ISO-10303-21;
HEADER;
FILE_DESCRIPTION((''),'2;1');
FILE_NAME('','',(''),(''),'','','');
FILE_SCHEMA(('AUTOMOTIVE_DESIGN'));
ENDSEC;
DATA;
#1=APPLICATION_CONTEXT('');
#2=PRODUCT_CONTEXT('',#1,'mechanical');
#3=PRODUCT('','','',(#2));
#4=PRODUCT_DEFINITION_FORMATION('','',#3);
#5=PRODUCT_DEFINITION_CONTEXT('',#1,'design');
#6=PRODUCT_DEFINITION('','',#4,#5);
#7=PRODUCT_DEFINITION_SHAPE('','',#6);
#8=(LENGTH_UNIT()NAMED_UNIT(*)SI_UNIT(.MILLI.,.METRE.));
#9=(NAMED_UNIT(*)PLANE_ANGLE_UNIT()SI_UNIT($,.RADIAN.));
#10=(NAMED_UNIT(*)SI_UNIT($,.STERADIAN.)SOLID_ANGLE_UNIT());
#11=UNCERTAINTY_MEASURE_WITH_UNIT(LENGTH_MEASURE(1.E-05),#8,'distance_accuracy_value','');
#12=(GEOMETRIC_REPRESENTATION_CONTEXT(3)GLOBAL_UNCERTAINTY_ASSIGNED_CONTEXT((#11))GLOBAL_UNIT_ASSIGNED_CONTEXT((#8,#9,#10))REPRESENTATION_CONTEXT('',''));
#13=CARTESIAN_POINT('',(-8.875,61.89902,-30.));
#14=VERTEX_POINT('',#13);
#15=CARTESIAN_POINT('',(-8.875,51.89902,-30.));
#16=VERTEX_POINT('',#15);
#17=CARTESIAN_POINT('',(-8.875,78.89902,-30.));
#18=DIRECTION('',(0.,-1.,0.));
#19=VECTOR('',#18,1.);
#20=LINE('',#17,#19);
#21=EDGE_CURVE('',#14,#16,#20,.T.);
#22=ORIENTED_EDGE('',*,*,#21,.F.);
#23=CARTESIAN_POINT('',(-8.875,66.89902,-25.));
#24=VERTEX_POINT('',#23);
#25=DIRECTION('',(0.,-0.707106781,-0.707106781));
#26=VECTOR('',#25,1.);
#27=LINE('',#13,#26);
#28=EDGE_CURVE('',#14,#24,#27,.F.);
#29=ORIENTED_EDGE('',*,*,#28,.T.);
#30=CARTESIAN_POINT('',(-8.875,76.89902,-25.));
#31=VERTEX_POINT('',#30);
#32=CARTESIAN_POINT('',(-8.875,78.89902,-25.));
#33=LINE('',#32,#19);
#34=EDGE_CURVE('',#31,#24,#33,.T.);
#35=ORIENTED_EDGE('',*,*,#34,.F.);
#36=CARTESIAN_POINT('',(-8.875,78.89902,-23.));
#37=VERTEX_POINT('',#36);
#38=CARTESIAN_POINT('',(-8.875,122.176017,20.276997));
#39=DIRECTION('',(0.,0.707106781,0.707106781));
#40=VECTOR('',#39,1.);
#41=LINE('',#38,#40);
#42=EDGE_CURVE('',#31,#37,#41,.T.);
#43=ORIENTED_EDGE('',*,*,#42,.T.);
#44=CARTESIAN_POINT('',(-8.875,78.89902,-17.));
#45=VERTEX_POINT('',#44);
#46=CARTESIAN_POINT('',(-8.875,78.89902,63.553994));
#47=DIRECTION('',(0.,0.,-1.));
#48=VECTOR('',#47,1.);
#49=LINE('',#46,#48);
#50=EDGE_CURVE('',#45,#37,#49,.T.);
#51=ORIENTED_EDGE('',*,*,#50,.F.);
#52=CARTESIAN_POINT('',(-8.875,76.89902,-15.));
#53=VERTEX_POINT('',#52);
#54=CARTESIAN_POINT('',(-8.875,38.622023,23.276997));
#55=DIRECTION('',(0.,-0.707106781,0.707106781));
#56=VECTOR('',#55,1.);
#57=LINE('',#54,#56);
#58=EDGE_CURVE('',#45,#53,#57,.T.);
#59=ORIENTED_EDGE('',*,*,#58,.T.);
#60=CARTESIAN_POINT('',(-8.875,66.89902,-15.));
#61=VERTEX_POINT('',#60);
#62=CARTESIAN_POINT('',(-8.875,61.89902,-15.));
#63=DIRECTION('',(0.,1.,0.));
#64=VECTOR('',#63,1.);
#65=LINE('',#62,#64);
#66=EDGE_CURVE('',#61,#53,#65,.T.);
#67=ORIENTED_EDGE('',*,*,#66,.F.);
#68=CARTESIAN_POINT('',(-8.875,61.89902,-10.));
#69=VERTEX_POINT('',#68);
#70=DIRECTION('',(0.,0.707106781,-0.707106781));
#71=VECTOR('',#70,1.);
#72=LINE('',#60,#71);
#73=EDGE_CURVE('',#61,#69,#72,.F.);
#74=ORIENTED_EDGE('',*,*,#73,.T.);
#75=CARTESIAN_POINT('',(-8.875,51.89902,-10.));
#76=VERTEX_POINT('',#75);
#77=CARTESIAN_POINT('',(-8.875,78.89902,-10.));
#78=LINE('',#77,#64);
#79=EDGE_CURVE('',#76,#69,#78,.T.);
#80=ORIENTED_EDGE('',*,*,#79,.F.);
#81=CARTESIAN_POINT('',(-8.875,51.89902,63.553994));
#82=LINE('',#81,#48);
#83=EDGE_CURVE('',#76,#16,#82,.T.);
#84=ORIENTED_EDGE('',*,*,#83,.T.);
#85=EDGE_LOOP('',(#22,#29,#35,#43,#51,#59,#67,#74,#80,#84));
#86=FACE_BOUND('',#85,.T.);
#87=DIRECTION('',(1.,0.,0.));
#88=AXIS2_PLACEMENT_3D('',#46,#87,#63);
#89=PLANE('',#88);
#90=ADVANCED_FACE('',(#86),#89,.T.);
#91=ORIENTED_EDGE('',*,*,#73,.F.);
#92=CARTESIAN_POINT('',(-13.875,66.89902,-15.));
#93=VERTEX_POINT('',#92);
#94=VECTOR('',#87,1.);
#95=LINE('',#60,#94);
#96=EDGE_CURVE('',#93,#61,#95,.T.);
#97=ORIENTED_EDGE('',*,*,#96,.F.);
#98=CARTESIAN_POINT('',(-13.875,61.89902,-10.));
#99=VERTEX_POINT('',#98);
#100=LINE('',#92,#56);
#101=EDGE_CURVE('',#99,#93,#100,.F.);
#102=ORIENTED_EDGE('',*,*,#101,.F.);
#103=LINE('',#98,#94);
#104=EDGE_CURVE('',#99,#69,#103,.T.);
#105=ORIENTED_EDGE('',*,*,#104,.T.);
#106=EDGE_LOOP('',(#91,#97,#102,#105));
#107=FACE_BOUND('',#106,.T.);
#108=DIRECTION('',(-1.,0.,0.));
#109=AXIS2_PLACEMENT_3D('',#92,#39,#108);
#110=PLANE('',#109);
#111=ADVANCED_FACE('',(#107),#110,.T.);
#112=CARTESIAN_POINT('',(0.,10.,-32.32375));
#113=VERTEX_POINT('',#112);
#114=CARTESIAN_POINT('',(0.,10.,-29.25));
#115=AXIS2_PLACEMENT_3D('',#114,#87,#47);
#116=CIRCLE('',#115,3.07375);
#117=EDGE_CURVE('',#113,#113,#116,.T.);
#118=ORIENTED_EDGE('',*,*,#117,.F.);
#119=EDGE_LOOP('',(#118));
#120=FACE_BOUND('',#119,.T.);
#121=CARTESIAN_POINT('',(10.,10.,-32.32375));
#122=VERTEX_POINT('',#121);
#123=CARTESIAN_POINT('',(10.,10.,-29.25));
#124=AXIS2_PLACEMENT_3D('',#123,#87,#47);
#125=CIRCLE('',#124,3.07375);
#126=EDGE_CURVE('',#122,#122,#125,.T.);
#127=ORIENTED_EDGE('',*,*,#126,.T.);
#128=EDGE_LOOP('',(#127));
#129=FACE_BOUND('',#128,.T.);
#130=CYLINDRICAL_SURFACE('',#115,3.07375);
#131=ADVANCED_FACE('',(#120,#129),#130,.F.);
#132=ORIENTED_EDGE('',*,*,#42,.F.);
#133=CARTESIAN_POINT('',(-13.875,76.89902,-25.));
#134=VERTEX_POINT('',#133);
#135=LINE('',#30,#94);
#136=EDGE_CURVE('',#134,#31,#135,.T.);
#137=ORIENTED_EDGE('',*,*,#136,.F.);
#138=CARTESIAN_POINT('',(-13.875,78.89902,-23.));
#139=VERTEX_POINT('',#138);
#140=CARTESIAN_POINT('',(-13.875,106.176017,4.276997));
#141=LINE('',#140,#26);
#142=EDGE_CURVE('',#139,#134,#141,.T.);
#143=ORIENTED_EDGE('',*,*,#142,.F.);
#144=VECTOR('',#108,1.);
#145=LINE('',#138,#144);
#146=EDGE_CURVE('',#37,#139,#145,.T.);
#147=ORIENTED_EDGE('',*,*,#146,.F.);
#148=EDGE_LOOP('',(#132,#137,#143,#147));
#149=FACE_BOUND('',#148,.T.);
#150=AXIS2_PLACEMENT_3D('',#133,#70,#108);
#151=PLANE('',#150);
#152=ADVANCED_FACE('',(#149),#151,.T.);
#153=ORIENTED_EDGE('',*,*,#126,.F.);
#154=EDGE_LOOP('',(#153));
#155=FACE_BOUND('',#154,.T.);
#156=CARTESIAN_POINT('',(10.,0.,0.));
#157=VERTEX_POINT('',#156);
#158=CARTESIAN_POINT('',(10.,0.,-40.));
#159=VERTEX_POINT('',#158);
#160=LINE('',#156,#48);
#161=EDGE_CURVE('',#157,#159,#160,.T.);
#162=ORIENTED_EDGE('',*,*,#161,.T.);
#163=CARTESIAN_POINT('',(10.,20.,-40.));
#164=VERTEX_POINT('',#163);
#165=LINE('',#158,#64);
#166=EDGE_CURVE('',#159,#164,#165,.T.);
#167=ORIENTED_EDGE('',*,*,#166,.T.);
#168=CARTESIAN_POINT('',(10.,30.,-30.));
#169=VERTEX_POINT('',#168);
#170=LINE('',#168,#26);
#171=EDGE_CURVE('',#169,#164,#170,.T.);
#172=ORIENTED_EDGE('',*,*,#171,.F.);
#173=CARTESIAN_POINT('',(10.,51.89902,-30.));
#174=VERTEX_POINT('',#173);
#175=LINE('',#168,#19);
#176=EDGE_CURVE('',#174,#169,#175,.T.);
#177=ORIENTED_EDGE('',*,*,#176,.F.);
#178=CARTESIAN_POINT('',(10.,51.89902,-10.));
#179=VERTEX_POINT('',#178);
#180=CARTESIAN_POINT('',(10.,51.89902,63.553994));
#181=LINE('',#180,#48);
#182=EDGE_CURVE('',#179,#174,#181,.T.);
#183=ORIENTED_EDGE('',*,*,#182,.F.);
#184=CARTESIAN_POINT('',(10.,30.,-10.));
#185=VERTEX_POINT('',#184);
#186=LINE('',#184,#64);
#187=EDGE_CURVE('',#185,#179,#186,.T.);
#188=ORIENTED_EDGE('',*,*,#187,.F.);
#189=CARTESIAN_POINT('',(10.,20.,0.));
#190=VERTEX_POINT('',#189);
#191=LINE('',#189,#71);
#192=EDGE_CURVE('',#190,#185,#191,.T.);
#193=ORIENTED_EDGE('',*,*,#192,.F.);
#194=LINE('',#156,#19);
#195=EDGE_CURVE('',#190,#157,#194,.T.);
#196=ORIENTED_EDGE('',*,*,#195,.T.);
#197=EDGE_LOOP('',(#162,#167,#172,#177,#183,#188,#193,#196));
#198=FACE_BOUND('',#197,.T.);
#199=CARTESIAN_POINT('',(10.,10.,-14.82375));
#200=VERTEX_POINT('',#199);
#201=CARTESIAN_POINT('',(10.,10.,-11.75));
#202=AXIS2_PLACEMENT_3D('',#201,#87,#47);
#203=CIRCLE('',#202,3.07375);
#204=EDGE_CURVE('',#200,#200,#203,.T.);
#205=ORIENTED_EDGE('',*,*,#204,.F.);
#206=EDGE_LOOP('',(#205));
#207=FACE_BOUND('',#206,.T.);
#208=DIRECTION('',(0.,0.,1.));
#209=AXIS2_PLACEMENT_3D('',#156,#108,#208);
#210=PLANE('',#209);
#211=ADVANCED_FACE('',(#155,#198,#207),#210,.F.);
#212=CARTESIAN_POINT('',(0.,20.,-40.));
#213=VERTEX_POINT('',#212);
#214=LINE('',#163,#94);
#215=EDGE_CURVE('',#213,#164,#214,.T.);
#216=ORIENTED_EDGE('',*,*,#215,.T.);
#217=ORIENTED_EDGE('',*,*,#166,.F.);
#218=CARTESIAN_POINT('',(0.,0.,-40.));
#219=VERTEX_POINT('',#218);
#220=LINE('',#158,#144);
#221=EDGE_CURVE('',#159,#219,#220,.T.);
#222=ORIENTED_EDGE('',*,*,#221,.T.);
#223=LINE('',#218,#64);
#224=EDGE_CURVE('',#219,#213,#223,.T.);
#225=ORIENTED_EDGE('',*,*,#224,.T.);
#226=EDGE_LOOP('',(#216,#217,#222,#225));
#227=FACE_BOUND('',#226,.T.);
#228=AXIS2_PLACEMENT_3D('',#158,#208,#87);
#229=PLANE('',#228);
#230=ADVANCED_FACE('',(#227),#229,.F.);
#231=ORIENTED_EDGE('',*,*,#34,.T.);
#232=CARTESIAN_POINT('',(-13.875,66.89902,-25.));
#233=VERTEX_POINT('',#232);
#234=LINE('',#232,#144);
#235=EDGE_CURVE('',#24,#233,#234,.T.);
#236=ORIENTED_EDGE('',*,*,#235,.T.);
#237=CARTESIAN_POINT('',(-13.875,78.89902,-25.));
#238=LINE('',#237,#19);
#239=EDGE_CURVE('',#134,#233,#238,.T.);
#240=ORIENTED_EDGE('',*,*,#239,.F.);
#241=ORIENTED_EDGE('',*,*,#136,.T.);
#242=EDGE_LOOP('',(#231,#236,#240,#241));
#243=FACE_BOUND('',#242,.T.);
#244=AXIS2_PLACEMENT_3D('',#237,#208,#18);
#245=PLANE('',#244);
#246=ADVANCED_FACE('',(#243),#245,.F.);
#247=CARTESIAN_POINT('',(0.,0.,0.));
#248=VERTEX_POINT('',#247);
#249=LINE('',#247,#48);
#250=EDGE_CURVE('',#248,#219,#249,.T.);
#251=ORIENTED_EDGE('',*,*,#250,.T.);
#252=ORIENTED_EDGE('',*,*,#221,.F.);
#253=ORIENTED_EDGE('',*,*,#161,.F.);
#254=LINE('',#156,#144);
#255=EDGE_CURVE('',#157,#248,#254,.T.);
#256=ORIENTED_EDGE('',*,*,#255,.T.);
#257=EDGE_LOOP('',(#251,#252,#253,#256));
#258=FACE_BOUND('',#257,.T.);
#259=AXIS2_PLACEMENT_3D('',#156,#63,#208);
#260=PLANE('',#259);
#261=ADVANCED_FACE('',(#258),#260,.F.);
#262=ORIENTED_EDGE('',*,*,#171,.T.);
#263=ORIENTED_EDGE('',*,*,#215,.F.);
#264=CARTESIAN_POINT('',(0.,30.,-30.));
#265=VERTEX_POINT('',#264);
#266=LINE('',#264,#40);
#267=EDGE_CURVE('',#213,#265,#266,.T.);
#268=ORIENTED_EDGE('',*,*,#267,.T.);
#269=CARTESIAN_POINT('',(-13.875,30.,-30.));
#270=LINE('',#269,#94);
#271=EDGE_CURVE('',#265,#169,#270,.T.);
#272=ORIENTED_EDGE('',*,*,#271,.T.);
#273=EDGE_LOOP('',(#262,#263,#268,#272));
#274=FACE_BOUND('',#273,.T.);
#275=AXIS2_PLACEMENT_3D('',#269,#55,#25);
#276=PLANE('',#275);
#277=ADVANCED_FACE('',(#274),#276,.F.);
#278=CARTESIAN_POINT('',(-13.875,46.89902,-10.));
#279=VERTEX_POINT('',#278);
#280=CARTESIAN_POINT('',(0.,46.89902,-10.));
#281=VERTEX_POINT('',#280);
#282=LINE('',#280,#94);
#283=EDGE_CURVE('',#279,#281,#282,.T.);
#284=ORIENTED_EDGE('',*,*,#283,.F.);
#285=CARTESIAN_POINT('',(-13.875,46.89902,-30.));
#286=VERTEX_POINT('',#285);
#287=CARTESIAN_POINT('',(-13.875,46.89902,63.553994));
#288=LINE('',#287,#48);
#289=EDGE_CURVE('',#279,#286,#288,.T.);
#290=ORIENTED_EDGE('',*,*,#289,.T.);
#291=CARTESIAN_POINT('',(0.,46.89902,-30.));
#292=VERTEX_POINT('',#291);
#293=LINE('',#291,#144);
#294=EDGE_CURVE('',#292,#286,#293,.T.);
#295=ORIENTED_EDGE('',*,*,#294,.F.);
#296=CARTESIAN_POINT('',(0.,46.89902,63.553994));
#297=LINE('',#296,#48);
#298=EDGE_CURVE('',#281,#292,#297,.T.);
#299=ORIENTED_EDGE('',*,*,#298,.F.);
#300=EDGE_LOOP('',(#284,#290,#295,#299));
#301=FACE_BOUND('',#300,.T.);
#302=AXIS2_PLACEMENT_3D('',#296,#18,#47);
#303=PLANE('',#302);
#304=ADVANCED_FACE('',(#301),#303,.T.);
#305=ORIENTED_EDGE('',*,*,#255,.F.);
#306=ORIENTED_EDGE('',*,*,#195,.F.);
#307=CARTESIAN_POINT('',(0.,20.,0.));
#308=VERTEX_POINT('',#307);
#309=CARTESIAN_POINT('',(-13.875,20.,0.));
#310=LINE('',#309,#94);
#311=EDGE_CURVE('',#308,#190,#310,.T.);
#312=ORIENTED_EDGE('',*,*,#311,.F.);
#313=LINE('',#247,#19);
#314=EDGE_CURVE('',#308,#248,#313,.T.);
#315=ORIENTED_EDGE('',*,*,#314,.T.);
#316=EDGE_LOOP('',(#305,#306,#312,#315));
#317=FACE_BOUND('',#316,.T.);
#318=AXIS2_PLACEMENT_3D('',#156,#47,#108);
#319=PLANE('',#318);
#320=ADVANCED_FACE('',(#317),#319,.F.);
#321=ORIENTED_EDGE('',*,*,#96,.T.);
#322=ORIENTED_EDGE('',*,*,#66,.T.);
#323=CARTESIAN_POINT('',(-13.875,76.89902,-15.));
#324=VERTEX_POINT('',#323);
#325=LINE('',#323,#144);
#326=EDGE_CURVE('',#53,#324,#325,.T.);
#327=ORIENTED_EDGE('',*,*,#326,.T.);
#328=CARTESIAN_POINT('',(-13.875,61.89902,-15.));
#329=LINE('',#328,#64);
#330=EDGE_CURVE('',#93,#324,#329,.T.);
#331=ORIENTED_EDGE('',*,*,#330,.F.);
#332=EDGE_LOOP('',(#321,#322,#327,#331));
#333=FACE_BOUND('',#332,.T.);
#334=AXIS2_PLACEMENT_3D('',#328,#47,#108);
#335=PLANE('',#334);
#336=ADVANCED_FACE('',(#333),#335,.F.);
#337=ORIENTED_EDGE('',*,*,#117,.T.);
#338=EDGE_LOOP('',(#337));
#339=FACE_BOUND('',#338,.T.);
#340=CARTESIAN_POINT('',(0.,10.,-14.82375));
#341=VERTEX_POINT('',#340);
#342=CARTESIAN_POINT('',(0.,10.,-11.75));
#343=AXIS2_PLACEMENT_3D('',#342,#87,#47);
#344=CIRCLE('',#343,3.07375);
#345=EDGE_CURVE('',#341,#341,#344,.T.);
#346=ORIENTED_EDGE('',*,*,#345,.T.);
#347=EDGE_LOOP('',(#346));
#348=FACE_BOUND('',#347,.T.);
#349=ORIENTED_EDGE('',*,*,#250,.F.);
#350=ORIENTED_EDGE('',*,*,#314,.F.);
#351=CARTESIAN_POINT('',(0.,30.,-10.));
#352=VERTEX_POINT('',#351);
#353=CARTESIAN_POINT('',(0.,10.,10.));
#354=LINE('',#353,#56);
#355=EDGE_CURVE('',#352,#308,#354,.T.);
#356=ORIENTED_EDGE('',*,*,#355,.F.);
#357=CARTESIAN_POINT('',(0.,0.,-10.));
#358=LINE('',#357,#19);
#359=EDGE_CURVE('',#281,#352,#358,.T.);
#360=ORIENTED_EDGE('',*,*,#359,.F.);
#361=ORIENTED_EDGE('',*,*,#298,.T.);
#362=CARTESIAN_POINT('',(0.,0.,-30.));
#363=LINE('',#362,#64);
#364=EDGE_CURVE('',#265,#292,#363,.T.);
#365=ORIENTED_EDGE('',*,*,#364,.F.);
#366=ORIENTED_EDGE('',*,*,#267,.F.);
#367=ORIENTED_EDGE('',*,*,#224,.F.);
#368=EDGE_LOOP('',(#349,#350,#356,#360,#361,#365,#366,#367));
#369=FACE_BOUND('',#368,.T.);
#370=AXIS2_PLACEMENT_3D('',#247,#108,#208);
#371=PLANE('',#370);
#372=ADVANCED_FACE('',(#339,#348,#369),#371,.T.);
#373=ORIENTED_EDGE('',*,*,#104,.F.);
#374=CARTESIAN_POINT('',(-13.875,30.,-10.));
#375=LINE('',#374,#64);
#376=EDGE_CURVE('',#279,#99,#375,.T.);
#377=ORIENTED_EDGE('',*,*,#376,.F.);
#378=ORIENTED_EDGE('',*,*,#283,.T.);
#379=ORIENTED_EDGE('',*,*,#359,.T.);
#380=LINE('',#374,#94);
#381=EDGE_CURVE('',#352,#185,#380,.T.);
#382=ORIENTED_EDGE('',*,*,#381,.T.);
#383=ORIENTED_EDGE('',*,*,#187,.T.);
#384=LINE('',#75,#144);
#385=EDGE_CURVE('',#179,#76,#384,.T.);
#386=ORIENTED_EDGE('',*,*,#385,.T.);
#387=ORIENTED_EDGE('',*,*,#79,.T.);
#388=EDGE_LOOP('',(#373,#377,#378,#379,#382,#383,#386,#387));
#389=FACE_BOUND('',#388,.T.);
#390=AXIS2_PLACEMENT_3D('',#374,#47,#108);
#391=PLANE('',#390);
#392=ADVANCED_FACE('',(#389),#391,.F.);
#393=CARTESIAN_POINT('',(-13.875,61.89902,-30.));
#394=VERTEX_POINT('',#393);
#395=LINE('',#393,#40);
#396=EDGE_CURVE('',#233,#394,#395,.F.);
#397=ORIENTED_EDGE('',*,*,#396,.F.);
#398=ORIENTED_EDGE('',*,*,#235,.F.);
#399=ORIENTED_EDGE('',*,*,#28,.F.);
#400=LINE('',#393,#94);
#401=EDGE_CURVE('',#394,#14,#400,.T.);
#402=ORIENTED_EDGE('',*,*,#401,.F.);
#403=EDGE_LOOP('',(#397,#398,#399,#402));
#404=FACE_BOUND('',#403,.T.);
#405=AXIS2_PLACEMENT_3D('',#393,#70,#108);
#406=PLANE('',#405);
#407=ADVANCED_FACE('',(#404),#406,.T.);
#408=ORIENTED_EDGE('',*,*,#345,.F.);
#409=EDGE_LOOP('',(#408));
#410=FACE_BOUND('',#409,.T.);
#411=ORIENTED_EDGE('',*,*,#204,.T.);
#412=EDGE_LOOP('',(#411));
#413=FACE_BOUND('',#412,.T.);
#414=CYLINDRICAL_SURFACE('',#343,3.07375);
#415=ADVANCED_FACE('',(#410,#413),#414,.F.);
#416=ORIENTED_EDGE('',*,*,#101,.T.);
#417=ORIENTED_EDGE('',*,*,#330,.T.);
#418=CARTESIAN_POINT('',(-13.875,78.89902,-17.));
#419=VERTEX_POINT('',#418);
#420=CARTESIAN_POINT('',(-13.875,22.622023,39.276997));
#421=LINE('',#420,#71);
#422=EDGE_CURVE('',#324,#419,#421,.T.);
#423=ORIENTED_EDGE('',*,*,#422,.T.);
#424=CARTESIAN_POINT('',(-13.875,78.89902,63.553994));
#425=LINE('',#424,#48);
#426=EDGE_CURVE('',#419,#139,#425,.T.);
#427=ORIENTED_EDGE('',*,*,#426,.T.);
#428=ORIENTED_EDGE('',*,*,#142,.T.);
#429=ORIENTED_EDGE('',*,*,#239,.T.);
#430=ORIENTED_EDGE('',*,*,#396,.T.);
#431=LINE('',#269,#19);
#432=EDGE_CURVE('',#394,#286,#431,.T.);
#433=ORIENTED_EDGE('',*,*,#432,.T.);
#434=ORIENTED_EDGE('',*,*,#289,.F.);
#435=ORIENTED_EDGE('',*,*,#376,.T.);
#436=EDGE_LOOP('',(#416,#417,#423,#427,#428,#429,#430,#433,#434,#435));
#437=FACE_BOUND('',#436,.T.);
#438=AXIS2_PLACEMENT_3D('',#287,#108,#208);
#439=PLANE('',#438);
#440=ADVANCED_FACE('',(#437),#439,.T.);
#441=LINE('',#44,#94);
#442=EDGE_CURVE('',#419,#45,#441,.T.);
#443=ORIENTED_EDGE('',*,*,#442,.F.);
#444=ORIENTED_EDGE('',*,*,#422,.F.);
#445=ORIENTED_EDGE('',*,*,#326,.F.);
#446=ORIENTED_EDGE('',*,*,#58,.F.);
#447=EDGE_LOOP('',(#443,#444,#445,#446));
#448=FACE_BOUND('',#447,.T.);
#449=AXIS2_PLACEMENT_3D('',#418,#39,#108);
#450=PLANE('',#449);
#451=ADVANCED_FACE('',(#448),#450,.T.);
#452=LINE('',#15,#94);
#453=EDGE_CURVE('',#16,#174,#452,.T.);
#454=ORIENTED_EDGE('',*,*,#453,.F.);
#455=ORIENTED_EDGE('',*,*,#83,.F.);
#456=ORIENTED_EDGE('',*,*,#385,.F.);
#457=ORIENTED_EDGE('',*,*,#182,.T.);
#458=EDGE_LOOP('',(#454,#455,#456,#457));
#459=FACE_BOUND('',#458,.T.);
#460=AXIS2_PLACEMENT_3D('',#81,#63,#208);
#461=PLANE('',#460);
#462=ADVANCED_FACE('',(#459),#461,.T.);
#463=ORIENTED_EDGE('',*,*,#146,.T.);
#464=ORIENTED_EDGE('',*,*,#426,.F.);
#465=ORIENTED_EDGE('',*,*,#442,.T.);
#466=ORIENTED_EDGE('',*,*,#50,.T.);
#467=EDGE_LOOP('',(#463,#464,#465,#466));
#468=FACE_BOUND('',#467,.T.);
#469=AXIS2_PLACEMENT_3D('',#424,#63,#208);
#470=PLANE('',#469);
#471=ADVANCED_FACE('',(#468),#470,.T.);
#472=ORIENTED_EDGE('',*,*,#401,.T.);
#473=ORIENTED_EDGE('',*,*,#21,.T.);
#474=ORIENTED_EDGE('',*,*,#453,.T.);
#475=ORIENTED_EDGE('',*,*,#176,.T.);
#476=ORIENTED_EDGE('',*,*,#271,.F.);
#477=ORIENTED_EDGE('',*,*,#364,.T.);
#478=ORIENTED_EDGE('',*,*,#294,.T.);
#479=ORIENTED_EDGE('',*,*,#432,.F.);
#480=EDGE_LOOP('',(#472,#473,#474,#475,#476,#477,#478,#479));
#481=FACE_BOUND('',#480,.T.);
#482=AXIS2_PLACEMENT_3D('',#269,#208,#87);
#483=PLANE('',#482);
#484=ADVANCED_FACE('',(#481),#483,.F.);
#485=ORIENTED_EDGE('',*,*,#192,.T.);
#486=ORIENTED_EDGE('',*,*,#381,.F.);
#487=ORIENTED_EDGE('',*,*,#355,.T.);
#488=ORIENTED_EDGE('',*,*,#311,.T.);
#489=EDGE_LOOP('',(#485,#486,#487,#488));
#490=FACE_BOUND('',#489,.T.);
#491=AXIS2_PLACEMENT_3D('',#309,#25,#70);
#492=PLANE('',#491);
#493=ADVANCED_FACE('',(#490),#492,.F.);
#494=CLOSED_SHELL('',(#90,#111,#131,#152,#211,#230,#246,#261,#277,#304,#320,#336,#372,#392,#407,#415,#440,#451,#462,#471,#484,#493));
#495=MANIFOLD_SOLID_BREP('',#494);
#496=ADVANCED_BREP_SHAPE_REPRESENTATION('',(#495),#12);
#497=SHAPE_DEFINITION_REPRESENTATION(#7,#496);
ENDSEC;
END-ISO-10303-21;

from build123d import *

# Parameters (mm, degrees)
SKETCH_1_W          = 40
SKETCH_1_H          = 20
EXTRUDE_1_DEPTH     = 10
SKETCH_2_R          = 3.07375
CUT_EXTRUDE_1_DEPTH = 10
EXTRUDE_2_DEPTH     = 40
CUT_EXTRUDE_2_DEPTH = 92.624619881
SKETCH_5_W          = 5
SKETCH_5_H          = 17
CUT_EXTRUDE_3_DEPTH = 91.450654881
CHAMFER_1_SIZE      = 5
CHAMFER_2_SIZE      = 2


with BuildPart() as part:
    # 草图1 → 凸台-拉伸1 (new body)
    with BuildSketch(Plane(origin=(0, 0, 0), x_dir=(0, 0, -1), z_dir=(1, 0, 0))):
        with Locations((20, 10)):
            Rectangle(SKETCH_1_W, SKETCH_1_H)
    extrude(amount=EXTRUDE_1_DEPTH)

    # 草图2 → 切除-拉伸1 (cut)
    with BuildSketch(Plane(origin=(10, 0, 0), x_dir=(0, 0, -1), z_dir=(1, 0, 0))):
        with Locations((11.75, 10)):
            Circle(SKETCH_2_R)
        with Locations((29.25, 10)):
            Circle(SKETCH_2_R)
    extrude(amount=-CUT_EXTRUDE_1_DEPTH, mode=Mode.SUBTRACT)

    # 草图3 → 凸台-拉伸2 (add)
    with BuildSketch(Plane(origin=(0, 0, -40), x_dir=(-1, 0, 0), z_dir=(0, 0, -1))):
        Polygon((0, 20), (0, 46.899019914), (13.875, 46.899019914), (13.875, 78.899019914), (8.875, 78.899019914), (8.875, 51.899019914), (-10, 51.899019914), (-10, 20), align=None)
    extrude(amount=-EXTRUDE_2_DEPTH)

    # 草图4 → 切除-拉伸2 (cut, through all)
    with BuildSketch(Plane(origin=(10, 0, 0), x_dir=(0, 0, -1), z_dir=(1, 0, 0))):
        Polygon((30, 30), (30, 88.448191602), (51.195528036, 88.448191602), (51.195528036, 8.804471964), align=None)
        Polygon((10, 30), (10, 90.801384447), (0, 90.801384447), (0, 20), align=None)
    extrude(amount=-CUT_EXTRUDE_2_DEPTH, mode=Mode.SUBTRACT)

    # 草图5 → 切除-拉伸3 (cut, through all)
    with BuildSketch(Plane(origin=(-8.875, 0, 0), x_dir=(0, 0, -1), z_dir=(1, 0, 0))):
        with Locations((12.5, 70.399019914)):
            Rectangle(SKETCH_5_W, SKETCH_5_H)
        with Locations((27.5, 70.399019914)):
            Rectangle(SKETCH_5_W, SKETCH_5_H)
    extrude(amount=-CUT_EXTRUDE_3_DEPTH, mode=Mode.SUBTRACT)

    # 倒角1
    chamfer_1_edges = [part.edges().sort_by_distance(p)[0] for p in [
        (-11.375, 61.899019914, -25),
        (-11.375, 61.899019914, -15),
    ]]
    chamfer(chamfer_1_edges, length=CHAMFER_1_SIZE - 0.0001)  # a hair under: the kernel refuses the full size

    # 倒角2
    chamfer_2_edges = [part.edges().sort_by_distance(p)[0] for p in [
        (-11.375, 78.899019914, -15),
        (-11.375, 78.899019914, -25),
    ]]
    chamfer(chamfer_2_edges, length=CHAMFER_2_SIZE)


solid = part.part
